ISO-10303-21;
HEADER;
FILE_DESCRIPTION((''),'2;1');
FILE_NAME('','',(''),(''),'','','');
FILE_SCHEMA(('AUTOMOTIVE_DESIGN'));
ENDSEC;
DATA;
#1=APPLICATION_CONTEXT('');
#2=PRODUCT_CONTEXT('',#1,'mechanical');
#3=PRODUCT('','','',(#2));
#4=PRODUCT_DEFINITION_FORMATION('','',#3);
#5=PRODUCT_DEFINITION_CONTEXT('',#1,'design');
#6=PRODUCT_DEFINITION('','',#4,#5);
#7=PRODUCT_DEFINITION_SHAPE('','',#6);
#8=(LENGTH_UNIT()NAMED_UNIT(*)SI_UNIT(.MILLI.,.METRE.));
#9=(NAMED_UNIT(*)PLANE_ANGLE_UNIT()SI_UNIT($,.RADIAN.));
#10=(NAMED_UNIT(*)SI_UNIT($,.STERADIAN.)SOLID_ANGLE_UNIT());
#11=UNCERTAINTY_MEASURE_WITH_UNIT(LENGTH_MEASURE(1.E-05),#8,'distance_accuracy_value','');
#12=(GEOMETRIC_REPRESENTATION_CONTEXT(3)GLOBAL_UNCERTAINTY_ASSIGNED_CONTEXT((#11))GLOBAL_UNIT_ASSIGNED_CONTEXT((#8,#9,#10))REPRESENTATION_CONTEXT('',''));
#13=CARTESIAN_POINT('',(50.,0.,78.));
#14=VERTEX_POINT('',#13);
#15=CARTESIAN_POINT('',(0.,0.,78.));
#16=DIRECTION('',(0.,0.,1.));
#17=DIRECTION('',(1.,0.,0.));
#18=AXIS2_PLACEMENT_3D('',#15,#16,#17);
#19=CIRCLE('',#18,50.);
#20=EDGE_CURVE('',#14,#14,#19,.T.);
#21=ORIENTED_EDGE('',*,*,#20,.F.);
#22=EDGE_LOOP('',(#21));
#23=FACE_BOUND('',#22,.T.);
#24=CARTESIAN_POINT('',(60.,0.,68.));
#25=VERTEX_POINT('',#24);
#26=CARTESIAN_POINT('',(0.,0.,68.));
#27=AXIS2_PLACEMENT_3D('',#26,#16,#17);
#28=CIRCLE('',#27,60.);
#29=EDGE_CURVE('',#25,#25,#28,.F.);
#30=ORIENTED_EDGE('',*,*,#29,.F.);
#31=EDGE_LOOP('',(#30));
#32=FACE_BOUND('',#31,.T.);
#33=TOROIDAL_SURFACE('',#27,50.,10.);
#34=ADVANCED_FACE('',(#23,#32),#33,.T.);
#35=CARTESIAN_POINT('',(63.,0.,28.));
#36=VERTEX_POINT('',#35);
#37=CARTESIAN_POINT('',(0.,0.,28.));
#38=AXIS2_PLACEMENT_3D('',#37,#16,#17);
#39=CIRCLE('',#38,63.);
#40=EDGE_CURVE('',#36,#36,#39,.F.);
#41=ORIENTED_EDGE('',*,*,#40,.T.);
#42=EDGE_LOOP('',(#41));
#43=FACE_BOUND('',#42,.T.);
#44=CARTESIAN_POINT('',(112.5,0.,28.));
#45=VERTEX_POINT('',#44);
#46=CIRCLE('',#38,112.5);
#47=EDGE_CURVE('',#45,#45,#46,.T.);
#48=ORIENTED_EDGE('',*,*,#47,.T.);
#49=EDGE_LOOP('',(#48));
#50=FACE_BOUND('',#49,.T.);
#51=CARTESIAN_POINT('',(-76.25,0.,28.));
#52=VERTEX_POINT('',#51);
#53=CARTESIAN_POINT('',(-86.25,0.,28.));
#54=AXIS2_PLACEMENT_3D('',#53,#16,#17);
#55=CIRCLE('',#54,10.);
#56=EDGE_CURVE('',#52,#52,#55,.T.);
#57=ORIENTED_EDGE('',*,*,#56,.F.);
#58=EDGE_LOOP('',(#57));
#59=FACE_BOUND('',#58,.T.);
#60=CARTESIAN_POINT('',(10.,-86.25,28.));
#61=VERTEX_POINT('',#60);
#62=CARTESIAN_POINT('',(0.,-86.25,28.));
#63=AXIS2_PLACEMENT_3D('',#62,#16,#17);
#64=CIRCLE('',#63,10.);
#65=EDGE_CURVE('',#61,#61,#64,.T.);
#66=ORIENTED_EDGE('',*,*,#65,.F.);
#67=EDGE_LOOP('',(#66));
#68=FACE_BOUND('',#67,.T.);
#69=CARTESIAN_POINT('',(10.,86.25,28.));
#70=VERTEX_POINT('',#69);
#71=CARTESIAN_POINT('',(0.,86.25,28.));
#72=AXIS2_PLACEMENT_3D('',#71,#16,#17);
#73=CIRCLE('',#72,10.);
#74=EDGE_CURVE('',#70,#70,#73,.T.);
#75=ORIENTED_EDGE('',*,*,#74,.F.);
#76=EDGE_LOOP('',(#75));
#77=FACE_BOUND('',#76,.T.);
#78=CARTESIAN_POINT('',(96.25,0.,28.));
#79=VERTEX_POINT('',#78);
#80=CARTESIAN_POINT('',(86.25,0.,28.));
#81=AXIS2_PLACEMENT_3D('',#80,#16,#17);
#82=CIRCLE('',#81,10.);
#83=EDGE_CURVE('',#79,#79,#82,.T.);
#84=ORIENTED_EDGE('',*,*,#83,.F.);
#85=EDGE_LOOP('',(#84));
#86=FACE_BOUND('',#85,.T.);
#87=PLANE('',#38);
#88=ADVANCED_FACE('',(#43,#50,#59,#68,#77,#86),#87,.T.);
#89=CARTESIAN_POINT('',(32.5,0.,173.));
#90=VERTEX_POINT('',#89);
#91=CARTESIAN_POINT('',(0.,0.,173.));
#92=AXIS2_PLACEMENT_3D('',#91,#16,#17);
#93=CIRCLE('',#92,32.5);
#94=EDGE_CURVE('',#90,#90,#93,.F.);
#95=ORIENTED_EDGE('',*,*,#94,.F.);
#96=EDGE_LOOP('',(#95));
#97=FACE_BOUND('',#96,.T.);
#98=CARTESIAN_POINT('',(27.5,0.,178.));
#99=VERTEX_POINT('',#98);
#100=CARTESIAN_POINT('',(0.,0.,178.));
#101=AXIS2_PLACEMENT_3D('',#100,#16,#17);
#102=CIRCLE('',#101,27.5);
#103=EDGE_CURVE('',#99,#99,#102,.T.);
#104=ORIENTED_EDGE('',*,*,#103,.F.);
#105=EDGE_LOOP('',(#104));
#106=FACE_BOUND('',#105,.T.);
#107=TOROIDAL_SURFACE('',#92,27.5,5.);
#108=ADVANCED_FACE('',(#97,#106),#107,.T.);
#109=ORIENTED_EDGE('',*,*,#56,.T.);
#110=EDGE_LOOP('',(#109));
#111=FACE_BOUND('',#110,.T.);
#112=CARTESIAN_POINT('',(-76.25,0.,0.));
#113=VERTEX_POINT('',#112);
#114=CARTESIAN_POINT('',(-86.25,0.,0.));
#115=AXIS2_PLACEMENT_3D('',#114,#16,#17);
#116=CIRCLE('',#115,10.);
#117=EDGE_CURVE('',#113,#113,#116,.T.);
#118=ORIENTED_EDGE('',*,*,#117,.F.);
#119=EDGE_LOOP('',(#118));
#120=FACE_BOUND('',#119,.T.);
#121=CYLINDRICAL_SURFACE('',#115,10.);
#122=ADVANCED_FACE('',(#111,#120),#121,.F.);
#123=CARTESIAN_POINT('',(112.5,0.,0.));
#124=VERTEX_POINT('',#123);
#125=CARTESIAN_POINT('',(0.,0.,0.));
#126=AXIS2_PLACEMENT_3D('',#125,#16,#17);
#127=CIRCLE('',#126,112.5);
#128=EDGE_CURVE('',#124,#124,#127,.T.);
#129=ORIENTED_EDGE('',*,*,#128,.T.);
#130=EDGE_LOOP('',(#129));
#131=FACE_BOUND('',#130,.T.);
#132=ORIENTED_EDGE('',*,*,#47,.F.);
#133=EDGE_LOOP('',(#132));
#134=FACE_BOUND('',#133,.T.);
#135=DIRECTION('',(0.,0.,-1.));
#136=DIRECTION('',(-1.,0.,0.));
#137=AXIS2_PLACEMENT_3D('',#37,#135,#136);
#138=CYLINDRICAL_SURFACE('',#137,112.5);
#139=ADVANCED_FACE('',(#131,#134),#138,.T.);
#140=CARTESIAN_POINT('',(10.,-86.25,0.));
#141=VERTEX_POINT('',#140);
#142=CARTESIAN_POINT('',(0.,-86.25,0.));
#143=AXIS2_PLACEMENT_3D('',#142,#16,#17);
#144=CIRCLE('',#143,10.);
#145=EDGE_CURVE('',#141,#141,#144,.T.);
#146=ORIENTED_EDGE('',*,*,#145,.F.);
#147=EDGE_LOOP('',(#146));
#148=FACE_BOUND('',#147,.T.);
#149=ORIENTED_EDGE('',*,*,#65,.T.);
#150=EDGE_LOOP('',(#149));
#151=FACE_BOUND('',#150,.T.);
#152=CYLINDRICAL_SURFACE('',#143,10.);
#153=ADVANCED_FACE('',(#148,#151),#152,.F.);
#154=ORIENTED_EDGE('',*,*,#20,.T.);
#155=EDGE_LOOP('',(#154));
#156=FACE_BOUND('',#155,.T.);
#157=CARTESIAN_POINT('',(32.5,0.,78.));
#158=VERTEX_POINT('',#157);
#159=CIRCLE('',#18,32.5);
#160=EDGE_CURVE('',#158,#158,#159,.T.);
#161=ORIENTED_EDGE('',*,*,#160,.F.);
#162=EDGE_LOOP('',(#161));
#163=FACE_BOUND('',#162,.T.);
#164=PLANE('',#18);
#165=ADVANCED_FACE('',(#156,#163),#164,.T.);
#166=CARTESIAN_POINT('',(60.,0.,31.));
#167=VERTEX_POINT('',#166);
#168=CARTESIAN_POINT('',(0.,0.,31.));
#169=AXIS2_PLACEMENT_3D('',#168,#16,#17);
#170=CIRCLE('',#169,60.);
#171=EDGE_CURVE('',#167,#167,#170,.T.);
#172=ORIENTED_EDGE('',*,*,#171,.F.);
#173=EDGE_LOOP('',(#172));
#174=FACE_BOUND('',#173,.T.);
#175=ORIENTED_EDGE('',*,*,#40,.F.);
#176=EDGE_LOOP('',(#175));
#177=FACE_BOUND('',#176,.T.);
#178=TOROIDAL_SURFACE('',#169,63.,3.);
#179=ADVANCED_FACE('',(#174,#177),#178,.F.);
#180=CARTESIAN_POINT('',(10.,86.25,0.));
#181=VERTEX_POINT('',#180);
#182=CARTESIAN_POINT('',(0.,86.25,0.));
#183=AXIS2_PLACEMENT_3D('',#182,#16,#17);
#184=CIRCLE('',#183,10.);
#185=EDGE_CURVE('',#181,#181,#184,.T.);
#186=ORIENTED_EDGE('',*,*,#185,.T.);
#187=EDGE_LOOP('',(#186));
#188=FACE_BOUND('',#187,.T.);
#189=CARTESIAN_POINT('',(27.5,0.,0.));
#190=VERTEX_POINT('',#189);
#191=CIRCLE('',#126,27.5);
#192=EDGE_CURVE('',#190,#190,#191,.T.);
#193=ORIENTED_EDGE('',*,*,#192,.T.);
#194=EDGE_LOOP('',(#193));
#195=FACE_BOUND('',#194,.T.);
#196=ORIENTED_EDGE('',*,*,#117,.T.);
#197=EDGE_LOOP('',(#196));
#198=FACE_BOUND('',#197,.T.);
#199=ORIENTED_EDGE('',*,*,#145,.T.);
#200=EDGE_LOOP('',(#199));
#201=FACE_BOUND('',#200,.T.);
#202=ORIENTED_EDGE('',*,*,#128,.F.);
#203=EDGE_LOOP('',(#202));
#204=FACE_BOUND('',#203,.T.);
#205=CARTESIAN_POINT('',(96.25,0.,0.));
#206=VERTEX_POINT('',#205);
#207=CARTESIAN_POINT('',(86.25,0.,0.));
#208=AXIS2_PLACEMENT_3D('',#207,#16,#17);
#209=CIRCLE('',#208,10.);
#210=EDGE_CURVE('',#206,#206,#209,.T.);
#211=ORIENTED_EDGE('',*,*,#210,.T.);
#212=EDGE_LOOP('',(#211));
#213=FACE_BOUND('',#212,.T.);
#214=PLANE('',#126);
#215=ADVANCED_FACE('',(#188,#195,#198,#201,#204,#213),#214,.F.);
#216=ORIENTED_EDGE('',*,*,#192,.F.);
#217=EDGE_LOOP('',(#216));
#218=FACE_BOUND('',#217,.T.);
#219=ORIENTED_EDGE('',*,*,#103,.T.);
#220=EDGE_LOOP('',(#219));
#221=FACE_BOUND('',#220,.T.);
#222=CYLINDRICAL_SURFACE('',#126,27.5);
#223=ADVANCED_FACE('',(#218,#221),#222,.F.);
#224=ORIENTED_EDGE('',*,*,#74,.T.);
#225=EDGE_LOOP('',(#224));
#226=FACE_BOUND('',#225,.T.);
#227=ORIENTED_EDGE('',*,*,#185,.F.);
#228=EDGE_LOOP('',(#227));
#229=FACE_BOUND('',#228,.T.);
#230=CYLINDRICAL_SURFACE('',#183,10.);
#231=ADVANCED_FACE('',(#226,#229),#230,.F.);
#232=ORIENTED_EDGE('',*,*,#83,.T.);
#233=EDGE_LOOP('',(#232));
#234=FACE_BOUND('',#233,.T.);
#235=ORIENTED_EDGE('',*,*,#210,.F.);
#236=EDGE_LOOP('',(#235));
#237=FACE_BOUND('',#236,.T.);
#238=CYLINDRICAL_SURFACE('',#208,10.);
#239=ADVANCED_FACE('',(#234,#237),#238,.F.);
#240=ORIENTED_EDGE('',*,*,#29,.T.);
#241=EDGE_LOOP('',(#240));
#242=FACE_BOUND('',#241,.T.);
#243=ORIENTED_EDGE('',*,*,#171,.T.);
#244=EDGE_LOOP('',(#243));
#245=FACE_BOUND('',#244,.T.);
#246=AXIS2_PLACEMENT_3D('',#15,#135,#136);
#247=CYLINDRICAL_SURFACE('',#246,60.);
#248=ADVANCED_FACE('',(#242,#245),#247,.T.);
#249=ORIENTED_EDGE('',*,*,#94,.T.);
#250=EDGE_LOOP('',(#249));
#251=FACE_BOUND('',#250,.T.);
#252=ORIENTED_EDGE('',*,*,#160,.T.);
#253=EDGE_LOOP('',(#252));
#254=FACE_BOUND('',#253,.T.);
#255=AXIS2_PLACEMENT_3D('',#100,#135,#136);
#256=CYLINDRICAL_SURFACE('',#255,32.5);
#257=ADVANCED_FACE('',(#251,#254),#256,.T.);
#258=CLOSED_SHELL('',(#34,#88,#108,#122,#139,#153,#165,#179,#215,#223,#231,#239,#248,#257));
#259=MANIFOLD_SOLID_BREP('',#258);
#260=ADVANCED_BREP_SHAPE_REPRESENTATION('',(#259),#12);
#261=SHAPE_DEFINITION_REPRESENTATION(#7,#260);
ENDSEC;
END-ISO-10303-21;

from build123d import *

# Parameters (mm, degrees)
SKETCH2_R           = 112.5
BOSS_EXTRUDE1_DEPTH = 28
SKETCH4_R           = 60
BOSS_EXTRUDE5_DEPTH = 50
FILLET2_R           = 3
FILLET3_R           = 10
SKETCH7_R           = 32.5
BOSS_EXTRUDE7_DEPTH = 100
SKETCH8_R           = 27.5
CUT_EXTRUDE1_DEPTH  = 239.73939767
SKETCH9_R           = 10
CUT_EXTRUDE2_DEPTH  = 219.660696057
FILLET4_R           = 5


with BuildPart() as part:
    # Sketch2 → Boss-Extrude1 (new body)
    with BuildSketch(Plane.XY):
        Circle(SKETCH2_R)
    extrude(amount=BOSS_EXTRUDE1_DEPTH)

    # Sketch4 → Boss-Extrude5 (add)
    with BuildSketch(Plane.XY.offset(28)):
        Circle(SKETCH4_R)
    extrude(amount=BOSS_EXTRUDE5_DEPTH)

    # Fillet2
    fillet2_edges = [part.edges().sort_by_distance(p)[0] for p in [
        (-60, 0, 28),
    ]]
    fillet(fillet2_edges, radius=FILLET2_R)

    # Fillet3
    fillet3_edges = [part.edges().sort_by_distance(p)[0] for p in [
        (-60, 0, 78),
    ]]
    fillet(fillet3_edges, radius=FILLET3_R)

    # Sketch7 → Boss-Extrude7 (add)
    with BuildSketch(Plane.XY.offset(78)):
        Circle(SKETCH7_R)
    extrude(amount=BOSS_EXTRUDE7_DEPTH)

    # Sketch8 → Cut-Extrude1 (cut, through all)
    with BuildSketch(Plane.XY.offset(178)):
        Circle(SKETCH8_R)
    extrude(amount=-CUT_EXTRUDE1_DEPTH, mode=Mode.SUBTRACT)

    # Sketch9 → Cut-Extrude2 (cut, through all)
    with BuildSketch(Plane.XY.offset(28)):
        with Locations((0, 86.25)):
            Circle(SKETCH9_R)
        with Locations((86.25, 0)):
            Circle(SKETCH9_R)
        with Locations((0, -86.25)):
            Circle(SKETCH9_R)
        with Locations((-86.25, 0)):
            Circle(SKETCH9_R)
    extrude(amount=-CUT_EXTRUDE2_DEPTH, mode=Mode.SUBTRACT)

    # Fillet4
    fillet4_edges = [part.edges().sort_by_distance(p)[0] for p in [
        (-32.5, 0, 178),
    ]]
    fillet(fillet4_edges, radius=FILLET4_R - 0.0001)  # a hair under: the kernel refuses the full size


solid = part.part
